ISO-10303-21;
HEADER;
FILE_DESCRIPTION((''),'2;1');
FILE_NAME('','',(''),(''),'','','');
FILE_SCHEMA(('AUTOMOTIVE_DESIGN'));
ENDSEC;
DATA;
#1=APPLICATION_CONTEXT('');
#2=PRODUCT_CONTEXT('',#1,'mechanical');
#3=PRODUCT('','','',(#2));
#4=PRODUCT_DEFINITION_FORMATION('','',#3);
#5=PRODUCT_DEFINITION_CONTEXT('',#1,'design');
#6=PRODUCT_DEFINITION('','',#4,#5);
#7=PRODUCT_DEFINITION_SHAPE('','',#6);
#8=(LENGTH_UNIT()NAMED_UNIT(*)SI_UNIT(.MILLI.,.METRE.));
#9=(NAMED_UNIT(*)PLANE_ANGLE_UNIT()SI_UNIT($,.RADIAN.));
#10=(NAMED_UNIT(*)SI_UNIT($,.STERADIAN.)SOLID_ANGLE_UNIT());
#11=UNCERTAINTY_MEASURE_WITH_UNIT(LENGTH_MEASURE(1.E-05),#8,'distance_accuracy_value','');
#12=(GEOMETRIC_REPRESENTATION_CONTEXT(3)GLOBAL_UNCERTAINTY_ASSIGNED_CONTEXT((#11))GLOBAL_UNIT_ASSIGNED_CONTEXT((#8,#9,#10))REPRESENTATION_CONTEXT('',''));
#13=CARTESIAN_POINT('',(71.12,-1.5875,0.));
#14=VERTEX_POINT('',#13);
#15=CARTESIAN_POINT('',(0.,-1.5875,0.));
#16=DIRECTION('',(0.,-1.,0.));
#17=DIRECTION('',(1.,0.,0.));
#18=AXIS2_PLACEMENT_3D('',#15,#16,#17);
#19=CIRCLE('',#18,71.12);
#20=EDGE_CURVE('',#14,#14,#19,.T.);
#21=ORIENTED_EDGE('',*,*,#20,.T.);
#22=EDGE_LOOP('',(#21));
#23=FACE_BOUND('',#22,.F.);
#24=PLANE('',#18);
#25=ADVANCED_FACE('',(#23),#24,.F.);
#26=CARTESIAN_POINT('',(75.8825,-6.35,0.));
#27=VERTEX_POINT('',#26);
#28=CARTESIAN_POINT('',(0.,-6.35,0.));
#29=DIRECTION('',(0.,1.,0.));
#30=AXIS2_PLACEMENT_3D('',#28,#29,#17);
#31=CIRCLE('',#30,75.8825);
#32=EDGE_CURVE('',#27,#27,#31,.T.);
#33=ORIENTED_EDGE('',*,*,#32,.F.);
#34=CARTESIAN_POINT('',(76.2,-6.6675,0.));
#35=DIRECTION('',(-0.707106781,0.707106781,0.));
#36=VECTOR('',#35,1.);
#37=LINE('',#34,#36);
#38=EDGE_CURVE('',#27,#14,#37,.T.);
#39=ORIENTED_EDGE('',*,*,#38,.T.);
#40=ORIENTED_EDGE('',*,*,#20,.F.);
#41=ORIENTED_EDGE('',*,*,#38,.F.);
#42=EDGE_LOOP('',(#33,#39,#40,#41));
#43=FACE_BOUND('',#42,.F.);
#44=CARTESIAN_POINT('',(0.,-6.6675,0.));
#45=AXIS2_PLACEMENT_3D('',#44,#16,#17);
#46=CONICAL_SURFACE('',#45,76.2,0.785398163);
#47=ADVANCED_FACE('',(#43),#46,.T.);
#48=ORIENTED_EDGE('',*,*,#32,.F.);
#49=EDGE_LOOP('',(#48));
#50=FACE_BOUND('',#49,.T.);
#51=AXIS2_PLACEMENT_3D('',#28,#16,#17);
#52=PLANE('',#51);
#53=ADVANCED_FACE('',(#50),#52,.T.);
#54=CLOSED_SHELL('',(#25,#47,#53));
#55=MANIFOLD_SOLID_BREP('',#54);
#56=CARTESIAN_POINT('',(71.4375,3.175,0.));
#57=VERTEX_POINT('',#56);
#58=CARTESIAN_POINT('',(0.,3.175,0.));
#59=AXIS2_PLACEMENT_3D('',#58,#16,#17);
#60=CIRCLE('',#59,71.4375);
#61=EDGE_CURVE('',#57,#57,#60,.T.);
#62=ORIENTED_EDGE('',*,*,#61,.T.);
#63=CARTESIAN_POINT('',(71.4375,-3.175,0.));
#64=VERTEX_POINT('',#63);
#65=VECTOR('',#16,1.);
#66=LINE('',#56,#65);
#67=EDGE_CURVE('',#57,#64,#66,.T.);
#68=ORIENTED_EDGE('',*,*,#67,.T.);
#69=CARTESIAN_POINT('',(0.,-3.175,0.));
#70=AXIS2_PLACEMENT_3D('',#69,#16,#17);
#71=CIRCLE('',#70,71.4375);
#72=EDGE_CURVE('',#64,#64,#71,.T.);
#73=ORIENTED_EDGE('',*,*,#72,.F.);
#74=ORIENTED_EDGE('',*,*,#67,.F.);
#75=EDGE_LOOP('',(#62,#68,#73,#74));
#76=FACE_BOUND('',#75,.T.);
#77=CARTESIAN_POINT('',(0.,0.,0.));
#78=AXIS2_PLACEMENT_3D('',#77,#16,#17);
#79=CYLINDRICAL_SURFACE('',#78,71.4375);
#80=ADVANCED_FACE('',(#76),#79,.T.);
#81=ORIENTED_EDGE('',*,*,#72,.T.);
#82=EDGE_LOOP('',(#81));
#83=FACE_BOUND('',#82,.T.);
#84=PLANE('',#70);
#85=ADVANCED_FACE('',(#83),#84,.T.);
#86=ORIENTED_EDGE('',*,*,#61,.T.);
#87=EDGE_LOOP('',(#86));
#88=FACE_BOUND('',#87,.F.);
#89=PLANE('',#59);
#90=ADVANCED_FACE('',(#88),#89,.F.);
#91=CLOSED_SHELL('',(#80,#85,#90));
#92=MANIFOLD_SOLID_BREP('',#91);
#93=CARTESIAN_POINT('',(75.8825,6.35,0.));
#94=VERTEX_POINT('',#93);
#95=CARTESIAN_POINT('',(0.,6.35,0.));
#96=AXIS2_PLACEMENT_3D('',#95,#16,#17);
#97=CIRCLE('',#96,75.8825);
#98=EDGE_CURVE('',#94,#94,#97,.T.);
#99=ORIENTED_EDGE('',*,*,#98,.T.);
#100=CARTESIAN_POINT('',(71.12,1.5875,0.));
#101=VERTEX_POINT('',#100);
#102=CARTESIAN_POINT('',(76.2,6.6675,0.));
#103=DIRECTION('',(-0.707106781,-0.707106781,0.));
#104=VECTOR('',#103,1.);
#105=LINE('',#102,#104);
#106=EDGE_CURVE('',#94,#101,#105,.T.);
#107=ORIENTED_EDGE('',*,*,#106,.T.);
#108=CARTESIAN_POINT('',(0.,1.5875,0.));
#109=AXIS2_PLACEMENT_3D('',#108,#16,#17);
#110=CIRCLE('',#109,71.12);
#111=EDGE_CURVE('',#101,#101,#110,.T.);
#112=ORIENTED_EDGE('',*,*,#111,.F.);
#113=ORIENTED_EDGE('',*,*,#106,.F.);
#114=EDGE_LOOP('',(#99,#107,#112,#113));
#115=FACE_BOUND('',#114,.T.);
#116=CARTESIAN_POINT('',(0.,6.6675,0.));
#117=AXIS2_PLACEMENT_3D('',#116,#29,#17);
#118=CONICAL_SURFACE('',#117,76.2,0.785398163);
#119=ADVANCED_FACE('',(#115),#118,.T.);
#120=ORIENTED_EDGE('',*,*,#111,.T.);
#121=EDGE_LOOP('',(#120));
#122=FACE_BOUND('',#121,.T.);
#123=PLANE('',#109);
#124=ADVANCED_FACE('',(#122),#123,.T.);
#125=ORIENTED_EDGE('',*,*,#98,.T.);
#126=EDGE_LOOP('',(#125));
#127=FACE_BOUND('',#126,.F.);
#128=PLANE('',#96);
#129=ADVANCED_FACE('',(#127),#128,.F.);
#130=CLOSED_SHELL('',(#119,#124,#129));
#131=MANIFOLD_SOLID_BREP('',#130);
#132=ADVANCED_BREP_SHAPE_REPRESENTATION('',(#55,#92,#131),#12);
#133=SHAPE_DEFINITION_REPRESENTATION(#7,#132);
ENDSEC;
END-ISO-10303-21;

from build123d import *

# Parameters (mm, degrees)
F0_R     = 76.2
F1_DEPTH = 6.35
F2_R     = 76.2
F3_DEPTH = 1.5875
F4_R     = 71.4375
F5_DEPTH = 3.175


# Not quite as in the source:
# - a fillet or chamfer that OpenCascade refuses, or shapes differently, is made with other operations: its cross-section is extruded or revolved along the edge and cut away or added


with BuildPart() as f1:
    # F0 (on Front) → F1 (new body, symmetric)
    with BuildSketch(Plane.XZ):
        Circle(F0_R)
    extrude(amount=F1_DEPTH, both=True)

    # F2 (on Front) → F3 (cut, symmetric)
    with BuildSketch(Plane.XZ):
        Circle(F2_R)
    extrude(amount=F3_DEPTH, both=True, mode=Mode.SUBTRACT)

    # F6: chamfer of 5.08 on 1 edges, made by hand

    # F6_s1 → F6_t2 (revolve, cut)
    with BuildSketch(Plane.XY):
        Polygon((76.2, 6.6675), (71.12, 1.5875), (76.2, 1.5875), align=None)
    revolve(axis=Axis((0, 1.5875, 0), (0, -1, 0)), mode=Mode.SUBTRACT)

    # F6#s1: chamfer of 5.08 on 1 edges, made by hand

    # F6_s1_s1 → F6_s1_t2 (revolve, cut)
    with BuildSketch(Plane.XY):
        Polygon((76.2, -6.6675), (71.12, -1.5875), (76.2, -1.5875), align=None)
    revolve(axis=Axis((0, -1.5875, 0), (0, -1, 0)), mode=Mode.SUBTRACT)


with BuildPart() as f5:
    # F4 (on Front) → F5 (new body, symmetric)
    with BuildSketch(Plane.XZ):
        Circle(F4_R)
    extrude(amount=F5_DEPTH, both=True)


solid = Compound([f1.part, f5.part])
